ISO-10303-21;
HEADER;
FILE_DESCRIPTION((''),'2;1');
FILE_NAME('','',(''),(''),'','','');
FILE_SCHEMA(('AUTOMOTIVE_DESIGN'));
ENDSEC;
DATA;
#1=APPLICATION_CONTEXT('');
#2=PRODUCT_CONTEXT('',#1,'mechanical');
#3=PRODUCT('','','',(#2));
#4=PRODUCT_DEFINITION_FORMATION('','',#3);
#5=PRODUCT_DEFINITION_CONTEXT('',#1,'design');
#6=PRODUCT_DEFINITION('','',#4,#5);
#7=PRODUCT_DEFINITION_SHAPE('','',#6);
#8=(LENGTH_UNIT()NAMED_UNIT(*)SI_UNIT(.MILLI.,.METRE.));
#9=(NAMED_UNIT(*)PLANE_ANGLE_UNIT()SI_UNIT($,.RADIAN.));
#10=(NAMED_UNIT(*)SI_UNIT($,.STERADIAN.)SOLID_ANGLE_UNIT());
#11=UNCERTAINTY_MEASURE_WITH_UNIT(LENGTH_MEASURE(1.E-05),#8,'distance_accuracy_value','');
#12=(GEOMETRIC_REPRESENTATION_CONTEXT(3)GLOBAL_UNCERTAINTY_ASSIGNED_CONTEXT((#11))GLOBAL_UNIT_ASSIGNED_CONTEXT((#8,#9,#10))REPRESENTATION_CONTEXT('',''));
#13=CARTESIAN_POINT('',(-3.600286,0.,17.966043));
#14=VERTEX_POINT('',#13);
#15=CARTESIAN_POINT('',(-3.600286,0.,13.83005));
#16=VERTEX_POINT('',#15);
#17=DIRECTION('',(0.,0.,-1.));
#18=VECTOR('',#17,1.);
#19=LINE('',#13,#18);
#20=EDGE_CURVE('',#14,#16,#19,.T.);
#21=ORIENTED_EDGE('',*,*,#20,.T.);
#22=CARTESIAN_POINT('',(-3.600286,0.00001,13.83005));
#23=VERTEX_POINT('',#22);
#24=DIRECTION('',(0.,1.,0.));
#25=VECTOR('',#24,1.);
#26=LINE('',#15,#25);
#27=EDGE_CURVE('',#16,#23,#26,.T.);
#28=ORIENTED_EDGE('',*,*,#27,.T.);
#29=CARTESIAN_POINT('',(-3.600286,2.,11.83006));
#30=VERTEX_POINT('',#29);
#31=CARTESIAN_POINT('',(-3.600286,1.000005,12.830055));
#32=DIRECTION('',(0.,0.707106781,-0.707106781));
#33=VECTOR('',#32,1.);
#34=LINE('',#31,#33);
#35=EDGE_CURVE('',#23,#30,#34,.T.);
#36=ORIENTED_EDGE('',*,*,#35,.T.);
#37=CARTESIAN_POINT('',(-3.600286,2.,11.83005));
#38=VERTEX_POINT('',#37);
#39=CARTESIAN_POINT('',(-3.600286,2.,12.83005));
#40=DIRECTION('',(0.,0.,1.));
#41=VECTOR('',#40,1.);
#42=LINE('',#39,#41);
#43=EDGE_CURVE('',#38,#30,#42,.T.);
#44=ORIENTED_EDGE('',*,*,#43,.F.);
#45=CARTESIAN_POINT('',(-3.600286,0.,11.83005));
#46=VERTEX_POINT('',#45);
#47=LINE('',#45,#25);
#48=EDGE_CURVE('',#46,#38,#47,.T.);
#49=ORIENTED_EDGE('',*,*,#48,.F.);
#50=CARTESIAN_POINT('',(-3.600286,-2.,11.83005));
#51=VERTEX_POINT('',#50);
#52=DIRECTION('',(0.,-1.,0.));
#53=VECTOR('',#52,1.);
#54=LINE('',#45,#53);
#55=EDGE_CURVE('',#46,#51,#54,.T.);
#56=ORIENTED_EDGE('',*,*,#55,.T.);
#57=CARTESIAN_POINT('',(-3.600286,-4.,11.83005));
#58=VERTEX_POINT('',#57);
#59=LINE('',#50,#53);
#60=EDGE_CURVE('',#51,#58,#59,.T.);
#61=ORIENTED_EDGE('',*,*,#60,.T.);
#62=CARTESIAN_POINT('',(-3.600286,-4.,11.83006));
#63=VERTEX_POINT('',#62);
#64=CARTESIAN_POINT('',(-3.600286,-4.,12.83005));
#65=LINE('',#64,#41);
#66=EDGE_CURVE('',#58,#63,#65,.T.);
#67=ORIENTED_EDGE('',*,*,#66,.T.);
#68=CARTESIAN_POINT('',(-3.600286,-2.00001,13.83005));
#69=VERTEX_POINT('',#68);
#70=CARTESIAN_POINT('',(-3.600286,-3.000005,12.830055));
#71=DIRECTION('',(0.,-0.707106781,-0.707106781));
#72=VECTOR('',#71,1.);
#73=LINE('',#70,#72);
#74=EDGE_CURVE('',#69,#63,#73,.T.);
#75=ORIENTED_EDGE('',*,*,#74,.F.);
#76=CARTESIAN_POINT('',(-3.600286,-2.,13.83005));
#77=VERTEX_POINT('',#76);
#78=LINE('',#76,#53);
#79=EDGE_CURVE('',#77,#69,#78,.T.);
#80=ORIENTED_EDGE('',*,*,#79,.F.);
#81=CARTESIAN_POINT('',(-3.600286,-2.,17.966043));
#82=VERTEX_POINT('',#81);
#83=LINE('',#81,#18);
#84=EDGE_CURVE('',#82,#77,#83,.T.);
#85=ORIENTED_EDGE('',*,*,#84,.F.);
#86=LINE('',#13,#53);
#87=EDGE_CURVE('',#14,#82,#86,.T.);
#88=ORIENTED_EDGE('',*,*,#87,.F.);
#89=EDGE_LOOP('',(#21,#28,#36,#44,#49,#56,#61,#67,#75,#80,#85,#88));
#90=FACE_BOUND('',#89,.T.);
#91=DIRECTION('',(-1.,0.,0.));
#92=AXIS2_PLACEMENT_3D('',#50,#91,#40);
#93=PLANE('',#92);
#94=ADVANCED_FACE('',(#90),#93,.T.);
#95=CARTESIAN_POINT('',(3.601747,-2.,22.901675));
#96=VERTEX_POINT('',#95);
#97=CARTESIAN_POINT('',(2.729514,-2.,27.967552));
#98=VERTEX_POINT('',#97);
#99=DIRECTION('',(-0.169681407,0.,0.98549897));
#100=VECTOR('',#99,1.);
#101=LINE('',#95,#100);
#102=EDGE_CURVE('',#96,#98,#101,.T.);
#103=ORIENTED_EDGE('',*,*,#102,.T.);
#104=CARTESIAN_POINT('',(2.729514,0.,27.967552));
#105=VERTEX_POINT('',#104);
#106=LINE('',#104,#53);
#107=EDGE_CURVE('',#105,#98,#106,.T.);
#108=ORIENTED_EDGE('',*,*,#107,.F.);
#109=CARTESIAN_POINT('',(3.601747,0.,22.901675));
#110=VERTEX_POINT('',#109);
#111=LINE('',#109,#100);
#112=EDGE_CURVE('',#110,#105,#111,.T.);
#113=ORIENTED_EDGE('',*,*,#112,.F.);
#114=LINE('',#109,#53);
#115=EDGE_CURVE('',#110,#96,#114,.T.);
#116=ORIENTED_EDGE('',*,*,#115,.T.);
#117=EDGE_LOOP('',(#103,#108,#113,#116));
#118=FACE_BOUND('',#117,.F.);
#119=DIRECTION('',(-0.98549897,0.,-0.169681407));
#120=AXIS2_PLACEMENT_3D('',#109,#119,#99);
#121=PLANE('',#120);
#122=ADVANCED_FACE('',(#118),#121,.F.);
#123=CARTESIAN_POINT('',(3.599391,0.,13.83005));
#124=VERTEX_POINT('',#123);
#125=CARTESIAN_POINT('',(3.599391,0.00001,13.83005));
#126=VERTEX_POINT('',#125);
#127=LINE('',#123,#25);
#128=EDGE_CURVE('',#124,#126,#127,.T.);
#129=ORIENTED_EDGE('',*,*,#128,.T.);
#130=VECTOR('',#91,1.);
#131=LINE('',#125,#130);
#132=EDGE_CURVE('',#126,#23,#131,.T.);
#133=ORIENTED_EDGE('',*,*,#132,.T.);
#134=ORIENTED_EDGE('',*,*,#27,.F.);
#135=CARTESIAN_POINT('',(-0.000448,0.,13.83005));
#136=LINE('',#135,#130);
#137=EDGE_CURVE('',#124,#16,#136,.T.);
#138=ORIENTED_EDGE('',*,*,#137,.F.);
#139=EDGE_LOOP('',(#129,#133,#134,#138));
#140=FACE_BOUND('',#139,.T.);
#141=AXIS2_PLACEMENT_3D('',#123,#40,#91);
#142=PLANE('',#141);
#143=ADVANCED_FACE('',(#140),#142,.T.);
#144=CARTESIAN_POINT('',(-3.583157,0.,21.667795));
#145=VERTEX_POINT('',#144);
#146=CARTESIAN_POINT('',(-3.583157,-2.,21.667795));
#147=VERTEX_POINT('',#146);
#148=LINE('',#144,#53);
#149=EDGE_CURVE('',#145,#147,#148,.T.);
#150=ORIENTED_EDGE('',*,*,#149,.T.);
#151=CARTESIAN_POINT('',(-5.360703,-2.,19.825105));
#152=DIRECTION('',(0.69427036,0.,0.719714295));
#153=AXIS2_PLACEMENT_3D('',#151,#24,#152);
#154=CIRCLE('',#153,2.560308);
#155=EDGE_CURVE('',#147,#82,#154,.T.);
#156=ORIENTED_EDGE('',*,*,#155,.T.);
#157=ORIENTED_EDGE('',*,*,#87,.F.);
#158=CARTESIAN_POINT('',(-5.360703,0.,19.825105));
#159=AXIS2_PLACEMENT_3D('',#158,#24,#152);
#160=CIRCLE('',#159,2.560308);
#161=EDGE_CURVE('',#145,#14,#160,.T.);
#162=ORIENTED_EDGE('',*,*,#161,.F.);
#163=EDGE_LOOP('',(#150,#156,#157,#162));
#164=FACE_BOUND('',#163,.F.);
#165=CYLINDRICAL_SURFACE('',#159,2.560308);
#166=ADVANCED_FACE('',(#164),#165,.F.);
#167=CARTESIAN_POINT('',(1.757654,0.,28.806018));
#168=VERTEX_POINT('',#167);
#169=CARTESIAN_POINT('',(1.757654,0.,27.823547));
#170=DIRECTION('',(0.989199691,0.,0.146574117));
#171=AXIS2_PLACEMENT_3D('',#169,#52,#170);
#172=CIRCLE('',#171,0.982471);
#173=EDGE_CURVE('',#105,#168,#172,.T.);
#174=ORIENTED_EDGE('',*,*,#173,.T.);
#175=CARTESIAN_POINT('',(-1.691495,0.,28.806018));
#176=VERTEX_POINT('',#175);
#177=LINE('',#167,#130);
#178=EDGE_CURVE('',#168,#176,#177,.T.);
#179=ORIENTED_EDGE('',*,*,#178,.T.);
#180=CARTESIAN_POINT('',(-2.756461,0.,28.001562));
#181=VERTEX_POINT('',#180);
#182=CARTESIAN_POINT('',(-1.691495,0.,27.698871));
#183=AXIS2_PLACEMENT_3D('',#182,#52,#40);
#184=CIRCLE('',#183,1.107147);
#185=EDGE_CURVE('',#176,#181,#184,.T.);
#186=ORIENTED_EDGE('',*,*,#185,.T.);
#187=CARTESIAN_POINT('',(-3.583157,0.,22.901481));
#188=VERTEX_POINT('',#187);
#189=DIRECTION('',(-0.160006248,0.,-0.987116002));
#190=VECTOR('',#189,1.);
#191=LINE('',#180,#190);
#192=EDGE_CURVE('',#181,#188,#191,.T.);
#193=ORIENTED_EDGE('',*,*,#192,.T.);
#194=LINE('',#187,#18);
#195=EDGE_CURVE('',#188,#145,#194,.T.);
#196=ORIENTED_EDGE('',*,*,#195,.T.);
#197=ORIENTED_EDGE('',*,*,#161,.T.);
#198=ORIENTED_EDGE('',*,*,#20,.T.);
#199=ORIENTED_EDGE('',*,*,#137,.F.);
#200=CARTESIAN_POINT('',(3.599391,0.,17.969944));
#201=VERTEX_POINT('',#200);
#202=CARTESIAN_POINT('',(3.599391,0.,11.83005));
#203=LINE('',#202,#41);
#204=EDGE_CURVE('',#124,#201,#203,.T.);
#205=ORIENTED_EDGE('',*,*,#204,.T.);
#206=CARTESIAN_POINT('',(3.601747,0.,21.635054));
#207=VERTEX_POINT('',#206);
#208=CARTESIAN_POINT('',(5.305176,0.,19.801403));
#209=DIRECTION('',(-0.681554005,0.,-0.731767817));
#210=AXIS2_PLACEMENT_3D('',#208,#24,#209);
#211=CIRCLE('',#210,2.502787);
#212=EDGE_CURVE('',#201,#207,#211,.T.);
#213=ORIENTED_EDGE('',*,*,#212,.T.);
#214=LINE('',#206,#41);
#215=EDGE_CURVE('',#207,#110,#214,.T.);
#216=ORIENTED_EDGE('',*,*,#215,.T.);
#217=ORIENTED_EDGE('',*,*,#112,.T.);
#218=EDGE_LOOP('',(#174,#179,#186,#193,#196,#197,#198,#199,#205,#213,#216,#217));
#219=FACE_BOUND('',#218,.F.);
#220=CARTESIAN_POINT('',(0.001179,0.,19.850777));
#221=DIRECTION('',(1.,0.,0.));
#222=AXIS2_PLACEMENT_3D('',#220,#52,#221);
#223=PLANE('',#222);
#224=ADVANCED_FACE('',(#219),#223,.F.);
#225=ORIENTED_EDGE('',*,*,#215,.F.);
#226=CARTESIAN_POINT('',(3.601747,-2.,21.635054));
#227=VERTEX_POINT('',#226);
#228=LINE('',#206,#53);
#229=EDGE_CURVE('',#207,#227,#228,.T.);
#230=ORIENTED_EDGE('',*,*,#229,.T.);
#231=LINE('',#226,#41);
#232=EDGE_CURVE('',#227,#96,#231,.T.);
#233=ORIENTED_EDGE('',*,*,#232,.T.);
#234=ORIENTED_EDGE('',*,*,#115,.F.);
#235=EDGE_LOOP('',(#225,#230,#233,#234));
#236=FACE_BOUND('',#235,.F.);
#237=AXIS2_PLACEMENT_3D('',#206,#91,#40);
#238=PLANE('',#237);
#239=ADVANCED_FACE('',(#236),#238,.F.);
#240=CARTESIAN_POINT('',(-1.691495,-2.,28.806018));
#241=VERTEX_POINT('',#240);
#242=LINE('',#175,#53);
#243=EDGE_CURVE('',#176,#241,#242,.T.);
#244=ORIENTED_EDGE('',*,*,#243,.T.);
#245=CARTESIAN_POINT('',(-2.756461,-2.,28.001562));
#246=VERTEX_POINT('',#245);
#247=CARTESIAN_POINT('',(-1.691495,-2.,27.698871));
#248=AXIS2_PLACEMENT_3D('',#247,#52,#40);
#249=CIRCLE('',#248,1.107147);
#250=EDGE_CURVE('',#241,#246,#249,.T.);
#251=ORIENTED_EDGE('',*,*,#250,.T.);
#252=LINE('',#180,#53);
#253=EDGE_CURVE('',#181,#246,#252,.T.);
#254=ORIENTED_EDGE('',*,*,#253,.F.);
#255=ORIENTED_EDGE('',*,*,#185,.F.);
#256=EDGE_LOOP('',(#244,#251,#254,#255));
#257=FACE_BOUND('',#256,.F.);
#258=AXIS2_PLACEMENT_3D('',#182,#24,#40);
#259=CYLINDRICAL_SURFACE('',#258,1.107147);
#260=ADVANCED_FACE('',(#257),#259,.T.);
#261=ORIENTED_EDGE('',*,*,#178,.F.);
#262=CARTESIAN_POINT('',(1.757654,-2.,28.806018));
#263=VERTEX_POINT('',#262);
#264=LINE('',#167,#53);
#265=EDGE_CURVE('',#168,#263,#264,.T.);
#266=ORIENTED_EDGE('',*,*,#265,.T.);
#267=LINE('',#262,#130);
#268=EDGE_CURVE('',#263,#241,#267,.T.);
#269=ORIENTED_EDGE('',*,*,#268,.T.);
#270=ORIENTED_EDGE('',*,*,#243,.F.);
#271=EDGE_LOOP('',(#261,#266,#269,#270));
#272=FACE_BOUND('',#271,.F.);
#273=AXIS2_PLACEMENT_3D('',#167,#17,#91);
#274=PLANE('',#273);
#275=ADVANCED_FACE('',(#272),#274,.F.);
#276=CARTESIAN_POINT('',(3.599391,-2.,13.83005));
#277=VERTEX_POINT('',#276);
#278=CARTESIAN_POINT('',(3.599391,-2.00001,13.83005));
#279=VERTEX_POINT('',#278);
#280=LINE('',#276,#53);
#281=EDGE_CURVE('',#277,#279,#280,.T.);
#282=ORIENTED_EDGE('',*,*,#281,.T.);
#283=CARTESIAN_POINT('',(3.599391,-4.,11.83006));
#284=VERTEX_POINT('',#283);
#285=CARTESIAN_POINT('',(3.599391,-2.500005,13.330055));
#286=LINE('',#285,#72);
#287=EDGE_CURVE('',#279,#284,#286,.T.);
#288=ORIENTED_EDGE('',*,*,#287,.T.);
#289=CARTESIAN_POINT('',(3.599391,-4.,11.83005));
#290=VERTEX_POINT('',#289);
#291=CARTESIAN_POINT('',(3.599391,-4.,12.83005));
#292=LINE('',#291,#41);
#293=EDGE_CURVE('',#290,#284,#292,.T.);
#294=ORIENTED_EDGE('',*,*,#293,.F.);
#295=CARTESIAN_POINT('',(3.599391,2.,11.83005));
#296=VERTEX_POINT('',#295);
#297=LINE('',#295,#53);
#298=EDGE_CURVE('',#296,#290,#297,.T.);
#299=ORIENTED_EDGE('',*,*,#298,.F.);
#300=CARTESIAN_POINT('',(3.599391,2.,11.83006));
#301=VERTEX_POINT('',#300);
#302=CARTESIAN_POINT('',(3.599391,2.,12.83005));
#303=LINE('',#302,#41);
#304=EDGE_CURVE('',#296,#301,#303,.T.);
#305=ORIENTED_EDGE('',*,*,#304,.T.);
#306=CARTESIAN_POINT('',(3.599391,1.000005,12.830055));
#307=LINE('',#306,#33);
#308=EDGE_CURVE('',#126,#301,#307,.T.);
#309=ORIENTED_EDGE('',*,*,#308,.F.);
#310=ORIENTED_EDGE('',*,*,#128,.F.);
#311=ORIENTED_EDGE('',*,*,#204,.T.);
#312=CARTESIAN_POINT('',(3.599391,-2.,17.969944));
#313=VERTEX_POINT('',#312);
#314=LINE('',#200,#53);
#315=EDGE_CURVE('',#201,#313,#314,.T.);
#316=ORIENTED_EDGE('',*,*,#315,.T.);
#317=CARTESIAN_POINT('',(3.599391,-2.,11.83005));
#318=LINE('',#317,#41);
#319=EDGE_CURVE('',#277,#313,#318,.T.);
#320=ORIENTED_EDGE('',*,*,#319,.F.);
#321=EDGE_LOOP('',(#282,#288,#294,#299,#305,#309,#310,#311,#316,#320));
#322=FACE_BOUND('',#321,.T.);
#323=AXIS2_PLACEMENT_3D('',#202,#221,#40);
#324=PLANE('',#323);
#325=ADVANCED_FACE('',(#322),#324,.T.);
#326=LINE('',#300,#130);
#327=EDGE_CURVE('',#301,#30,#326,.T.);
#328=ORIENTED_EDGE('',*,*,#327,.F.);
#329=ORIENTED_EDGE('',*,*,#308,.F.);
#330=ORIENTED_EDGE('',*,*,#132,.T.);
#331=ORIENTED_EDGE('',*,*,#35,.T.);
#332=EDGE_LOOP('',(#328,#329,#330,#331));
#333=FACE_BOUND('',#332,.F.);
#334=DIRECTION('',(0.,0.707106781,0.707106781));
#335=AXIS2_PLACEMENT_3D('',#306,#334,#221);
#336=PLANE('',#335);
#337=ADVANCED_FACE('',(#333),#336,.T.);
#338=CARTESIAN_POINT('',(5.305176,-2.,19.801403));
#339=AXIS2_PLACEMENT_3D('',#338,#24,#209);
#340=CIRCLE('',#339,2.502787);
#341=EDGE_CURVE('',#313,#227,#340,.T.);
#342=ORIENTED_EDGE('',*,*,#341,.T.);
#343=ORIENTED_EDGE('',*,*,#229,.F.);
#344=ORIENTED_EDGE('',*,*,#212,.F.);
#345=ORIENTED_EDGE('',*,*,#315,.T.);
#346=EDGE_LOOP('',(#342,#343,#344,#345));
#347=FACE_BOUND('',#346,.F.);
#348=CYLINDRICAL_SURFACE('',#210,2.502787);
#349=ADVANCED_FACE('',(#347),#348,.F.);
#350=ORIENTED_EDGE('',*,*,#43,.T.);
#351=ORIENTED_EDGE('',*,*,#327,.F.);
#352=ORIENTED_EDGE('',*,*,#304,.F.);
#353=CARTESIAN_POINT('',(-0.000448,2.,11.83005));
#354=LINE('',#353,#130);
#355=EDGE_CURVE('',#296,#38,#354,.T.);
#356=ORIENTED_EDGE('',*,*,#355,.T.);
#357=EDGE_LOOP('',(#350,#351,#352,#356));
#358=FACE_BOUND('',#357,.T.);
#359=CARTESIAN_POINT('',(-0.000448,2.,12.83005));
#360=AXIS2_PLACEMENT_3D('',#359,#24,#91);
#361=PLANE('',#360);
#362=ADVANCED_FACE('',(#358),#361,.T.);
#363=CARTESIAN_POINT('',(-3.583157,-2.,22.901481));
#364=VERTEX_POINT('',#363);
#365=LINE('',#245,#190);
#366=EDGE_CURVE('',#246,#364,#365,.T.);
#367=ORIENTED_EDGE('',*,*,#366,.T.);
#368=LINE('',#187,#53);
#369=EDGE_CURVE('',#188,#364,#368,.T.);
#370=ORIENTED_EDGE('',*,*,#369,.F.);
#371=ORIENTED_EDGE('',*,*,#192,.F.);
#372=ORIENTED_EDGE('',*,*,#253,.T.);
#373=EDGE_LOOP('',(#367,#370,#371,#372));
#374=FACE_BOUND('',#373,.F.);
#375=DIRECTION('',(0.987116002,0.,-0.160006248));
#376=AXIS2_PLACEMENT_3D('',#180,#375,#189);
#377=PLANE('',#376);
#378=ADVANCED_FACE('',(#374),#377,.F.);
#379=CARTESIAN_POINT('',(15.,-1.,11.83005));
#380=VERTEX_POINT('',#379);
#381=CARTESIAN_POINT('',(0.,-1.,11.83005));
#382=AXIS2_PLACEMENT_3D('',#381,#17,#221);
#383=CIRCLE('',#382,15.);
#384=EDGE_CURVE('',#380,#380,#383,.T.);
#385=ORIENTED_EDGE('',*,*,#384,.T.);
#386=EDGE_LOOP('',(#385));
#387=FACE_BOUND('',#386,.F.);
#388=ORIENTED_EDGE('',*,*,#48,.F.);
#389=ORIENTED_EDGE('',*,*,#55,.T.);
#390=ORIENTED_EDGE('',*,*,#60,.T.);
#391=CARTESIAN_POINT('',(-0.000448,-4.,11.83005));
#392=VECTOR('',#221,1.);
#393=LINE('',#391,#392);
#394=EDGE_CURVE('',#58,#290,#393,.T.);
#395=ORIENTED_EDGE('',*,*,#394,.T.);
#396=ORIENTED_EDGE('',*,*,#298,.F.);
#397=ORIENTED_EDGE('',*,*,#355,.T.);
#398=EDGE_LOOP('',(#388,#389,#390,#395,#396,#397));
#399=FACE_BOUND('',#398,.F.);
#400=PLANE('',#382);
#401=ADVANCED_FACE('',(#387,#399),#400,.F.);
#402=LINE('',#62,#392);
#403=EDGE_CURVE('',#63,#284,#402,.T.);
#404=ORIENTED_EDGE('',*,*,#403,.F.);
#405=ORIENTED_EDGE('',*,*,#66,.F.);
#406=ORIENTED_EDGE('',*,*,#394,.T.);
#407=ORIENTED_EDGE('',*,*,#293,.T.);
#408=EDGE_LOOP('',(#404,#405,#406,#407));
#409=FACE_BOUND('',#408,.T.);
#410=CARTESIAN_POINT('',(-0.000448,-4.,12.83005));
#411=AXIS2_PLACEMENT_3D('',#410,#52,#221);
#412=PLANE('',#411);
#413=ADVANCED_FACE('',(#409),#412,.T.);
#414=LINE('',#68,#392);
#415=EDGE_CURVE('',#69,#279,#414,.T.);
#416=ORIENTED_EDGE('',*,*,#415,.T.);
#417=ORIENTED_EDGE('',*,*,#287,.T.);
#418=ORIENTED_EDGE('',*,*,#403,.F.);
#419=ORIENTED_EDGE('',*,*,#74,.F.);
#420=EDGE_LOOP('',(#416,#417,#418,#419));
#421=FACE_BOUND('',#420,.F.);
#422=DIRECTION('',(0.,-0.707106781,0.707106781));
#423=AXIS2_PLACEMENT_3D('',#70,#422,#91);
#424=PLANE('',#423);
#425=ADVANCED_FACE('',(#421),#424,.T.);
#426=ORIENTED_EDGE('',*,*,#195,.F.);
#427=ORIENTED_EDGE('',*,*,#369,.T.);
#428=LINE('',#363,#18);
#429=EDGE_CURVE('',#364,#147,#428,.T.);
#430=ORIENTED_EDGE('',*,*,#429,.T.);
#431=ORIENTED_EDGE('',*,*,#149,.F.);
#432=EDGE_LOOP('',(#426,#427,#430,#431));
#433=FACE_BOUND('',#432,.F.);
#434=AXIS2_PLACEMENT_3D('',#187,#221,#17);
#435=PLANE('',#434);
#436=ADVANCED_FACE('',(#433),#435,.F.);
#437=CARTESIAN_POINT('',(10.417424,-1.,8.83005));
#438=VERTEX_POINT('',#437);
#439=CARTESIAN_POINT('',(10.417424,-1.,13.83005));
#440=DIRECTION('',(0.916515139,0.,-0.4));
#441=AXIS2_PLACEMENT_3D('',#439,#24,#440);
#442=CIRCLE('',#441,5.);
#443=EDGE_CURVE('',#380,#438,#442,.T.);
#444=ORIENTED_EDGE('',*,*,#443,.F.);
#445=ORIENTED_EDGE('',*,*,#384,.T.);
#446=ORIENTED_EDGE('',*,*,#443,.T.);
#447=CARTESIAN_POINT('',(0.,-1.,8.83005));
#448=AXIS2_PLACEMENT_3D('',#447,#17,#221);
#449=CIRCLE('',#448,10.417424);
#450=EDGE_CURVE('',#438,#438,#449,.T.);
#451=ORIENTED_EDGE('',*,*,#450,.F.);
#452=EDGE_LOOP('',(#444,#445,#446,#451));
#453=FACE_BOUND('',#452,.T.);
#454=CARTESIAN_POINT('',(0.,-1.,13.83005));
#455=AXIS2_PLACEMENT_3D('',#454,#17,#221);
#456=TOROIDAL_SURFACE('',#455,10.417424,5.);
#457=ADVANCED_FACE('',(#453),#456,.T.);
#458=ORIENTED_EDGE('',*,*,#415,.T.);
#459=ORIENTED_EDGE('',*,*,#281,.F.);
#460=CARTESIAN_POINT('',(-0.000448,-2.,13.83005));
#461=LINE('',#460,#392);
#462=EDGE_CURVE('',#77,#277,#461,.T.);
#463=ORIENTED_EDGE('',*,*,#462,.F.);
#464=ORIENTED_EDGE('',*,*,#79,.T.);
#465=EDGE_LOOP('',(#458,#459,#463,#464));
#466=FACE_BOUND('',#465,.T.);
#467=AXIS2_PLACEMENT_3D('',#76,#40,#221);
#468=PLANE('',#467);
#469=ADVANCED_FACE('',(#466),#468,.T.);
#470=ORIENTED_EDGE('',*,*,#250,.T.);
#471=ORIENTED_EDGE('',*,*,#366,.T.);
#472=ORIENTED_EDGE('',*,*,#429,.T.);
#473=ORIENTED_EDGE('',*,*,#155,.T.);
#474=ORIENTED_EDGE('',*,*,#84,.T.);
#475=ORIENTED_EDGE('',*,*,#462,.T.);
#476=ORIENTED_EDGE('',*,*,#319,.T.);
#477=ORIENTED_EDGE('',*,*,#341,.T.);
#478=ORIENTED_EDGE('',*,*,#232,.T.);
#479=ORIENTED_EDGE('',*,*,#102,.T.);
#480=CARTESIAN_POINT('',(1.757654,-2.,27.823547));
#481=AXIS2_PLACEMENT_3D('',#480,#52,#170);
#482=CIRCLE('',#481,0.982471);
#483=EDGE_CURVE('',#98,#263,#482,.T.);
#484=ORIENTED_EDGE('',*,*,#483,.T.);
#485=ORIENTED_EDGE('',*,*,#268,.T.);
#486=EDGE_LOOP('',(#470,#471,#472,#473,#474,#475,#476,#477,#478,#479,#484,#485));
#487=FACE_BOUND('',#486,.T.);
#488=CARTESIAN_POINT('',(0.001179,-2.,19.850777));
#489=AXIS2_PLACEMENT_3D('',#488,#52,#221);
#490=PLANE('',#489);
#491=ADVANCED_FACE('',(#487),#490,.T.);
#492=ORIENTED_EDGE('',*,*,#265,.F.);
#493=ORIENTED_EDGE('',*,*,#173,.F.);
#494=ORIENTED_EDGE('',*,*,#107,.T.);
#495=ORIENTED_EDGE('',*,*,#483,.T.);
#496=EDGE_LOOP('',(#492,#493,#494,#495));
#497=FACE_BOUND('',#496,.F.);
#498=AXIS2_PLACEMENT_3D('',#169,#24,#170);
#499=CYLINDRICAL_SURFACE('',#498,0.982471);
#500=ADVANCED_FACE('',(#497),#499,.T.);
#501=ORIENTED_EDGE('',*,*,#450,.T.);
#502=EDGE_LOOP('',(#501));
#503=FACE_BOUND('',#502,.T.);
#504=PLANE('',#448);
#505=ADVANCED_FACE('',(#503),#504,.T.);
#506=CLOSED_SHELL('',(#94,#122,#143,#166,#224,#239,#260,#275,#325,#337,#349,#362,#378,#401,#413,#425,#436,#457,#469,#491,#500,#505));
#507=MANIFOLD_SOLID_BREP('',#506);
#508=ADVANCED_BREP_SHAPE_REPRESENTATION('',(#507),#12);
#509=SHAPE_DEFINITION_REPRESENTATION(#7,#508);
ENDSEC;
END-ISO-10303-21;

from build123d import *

# Parameters (mm, degrees)
F1_DEPTH = 2
F2_R     = 15
F2_W     = 7.199677173
F2_H     = 2
F3_DEPTH = 3
F4_W     = 7.199677173
F4_H     = 2
F5_DEPTH = 2
F6_SIZE  = 1.99999
F7_W     = 7.199677173
F7_H     = 2
F8_DEPTH = 2
F9_SIZE  = 1.99999


# Not quite as in the source:
# - a fillet or chamfer that OpenCascade refuses, or shapes differently, is made with other operations: its cross-section is extruded or revolved along the edge and cut away or added
# - a fillet or chamfer is up to 0.001 mm smaller than in the source, because OpenCascade refuses the exact size


with BuildPart() as f1:
    # F0 (on Front) → F1 (new body)
    with BuildSketch(Plane.XZ):
        with BuildLine():
            ThreePointArc((-1.6914953012, 28.8060177118), (-2.3588223185, 28.5823009391), (-2.7564610355, 28.0015617609))
            Line((-2.7564610355, 28.0015617609), (-3.5831569694, 22.9014810175))
            Line((-3.5831569694, 22.9014810175), (-3.5831569694, 21.6677952558))
            ThreePointArc((-3.5831569694, 21.6677952558), (-2.8004223212, 19.8132576007), (-3.6002863199, 17.9660432041))
            Line((-3.6002863199, 17.9660432041), (-3.6002863199, 11.8300495669))
            Line((-3.6002863199, 11.8300495669), (3.5993908532, 11.8300495669))
            Line((3.5993908532, 11.8300495669), (3.5993908532, 17.969943583))
            ThreePointArc((3.5993908532, 17.969943583), (2.8023887863, 19.8030117696), (3.6017470993, 21.6350536793))
            Line((3.6017470993, 21.6350536793), (3.6017470993, 22.9016747326))
            Line((3.6017470993, 22.9016747326), (2.7295136824, 27.9675517231))
            ThreePointArc((2.7295136824, 27.9675517231), (2.3994359185, 28.5674317792), (1.7576538958, 28.8060177118))
            Line((1.7576538958, 28.8060177118), (-1.6914953012, 28.8060177118))
        make_face()
    extrude(amount=F1_DEPTH)

    # F2 (on face) → F3 (join)
    with BuildSketch(Plane(origin=(0, 0, 11.8300495669), x_dir=(1, 0, 0), z_dir=(0, 0, -1))):
        with Locations((0, 1)):
            Circle(F2_R)
        with Locations((-0.0004477333, 1)):
            Rectangle(F2_W, F2_H, mode=Mode.SUBTRACT)
        with Locations((-0.0004477333, 1)):
            Rectangle(F2_W, F2_H)
    extrude(amount=F3_DEPTH)

    # F4 (on face) → F5 (join)
    with BuildSketch(Plane(origin=(0, 0, 0), x_dir=(-1, 0, 0), z_dir=(0, 1, 0))):
        with Locations((0.0004477333, 12.8300495669)):
            Rectangle(F4_W, F4_H)
    extrude(amount=F5_DEPTH)

    # F6 (size 2 in the source; OpenCascade refuses exactly that, so slightly less here)
    f6_edges = [f1.edges().sort_by_distance(p)[0] for p in [
        (-0.000448, 2, 13.83005),
    ]]
    chamfer(f6_edges, length=F6_SIZE)

    # F7 (on face) → F8 (join)
    with BuildSketch(Plane.XZ.offset(2)):
        with Locations((-0.0004477333, 12.8300495669)):
            Rectangle(F7_W, F7_H)
    extrude(amount=F8_DEPTH)

    # F9 (size 2 in the source; OpenCascade refuses exactly that, so slightly less here)
    f9_edges = [f1.edges().sort_by_distance(p)[0] for p in [
        (-0.000448, -4, 13.83005),
    ]]
    chamfer(f9_edges, length=F9_SIZE)

    # F10: fillet of radius 5 on 1 edges, made by hand

    # F10_s1 → F10_t2 (revolve, cut)
    with BuildSketch(Plane.XZ.offset(1)):
        with BuildLine():
            ThreePointArc((15, 11.8300495669), (13.1560370926, 9.6467494343), (10.417424305, 8.8300495669))
            Line((10.417424305, 8.8300495669), (15, 8.8300495669))
            Line((15, 8.8300495669), (15, 11.8300495669))
        make_face()
    revolve(axis=Axis((0, -1, 8.8300495669), (0, 0, -1)), mode=Mode.SUBTRACT)


solid = f1.part
